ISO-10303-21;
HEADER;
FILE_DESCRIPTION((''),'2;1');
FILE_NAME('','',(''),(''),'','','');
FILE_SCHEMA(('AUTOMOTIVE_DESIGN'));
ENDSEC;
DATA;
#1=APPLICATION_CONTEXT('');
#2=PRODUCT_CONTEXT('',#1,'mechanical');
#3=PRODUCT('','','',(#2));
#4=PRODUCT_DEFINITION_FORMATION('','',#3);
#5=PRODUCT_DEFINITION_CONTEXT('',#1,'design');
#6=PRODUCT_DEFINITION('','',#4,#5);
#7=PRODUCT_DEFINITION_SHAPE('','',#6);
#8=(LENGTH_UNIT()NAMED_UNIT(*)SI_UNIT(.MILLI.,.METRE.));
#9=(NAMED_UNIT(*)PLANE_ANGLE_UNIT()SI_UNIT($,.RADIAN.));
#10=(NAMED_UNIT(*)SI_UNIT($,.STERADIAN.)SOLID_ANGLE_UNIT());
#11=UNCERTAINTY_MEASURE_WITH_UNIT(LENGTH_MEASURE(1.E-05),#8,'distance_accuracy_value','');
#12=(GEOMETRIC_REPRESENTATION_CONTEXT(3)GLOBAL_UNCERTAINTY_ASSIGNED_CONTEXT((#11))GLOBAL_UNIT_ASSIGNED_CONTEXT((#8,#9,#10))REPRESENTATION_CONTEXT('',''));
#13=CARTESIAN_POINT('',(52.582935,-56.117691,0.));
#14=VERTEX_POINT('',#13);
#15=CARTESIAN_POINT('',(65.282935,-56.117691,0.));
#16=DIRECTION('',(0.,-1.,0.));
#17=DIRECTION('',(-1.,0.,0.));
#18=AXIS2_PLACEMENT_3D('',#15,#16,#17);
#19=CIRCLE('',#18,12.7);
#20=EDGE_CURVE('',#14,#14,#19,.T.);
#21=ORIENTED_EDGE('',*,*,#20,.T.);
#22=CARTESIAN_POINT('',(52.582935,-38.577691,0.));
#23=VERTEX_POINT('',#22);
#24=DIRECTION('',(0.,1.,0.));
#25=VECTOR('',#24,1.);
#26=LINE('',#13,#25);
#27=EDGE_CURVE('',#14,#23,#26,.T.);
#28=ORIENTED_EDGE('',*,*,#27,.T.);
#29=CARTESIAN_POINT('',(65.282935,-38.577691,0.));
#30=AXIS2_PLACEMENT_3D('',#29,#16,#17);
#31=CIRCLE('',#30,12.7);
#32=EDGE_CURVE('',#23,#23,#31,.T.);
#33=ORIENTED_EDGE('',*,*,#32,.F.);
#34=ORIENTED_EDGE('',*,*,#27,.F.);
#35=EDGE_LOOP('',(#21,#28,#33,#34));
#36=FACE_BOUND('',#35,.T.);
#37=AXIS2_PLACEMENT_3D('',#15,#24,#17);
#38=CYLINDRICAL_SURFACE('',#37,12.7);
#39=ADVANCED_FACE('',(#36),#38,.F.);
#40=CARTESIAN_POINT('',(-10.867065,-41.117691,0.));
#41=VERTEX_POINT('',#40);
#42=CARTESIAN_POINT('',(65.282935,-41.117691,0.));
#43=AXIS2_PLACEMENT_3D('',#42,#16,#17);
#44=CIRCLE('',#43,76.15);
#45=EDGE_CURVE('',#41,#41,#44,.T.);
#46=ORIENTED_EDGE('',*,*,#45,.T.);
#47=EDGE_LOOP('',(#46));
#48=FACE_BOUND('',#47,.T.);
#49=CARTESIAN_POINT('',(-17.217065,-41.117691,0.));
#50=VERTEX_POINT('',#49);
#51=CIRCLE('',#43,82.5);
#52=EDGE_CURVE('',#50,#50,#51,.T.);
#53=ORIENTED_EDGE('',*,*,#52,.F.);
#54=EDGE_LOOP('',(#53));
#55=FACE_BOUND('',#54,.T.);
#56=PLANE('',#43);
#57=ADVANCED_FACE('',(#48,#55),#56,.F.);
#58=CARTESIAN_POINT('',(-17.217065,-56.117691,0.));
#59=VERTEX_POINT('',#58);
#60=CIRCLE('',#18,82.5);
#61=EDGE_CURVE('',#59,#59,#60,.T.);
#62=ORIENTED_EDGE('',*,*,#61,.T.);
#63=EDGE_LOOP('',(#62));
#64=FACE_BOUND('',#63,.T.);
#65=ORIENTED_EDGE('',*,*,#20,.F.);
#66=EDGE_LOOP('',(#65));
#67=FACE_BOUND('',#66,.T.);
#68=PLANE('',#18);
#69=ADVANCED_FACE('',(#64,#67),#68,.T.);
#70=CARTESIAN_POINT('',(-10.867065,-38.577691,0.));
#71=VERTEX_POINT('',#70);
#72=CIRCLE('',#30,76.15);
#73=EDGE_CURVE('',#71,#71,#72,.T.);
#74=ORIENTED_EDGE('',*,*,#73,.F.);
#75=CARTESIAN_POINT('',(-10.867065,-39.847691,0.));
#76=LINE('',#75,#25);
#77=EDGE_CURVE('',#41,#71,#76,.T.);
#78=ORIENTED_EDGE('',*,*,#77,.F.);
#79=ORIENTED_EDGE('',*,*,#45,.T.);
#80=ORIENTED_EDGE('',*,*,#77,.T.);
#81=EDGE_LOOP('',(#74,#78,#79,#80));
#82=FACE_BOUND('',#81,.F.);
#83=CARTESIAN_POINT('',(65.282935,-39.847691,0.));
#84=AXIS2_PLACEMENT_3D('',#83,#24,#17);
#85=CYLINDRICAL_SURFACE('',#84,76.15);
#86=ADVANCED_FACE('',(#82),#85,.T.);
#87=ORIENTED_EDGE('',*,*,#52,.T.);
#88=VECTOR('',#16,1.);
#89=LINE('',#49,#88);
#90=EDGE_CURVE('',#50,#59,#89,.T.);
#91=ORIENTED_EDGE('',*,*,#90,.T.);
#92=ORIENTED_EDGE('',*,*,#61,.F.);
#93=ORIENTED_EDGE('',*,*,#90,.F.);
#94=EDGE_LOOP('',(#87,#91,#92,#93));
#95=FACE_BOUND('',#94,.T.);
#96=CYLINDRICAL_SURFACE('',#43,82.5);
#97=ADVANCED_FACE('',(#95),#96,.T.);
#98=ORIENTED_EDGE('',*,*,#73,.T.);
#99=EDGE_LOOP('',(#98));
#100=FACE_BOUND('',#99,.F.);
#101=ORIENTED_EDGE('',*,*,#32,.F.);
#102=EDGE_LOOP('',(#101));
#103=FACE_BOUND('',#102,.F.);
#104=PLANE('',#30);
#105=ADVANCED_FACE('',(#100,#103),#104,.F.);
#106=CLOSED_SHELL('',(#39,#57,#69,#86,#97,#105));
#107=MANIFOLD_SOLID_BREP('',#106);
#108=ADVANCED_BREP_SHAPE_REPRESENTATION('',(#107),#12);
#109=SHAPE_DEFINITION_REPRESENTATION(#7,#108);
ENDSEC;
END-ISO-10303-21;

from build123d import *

# Parameters (mm, degrees)
F0_W = 63.45
F0_H = 2.54


# Not quite as in the source:
# - a feature names something its author has since deleted; it is built from what else it names


with BuildPart() as f1:
    # F0 (on Top) → F1 (revolve)
    with BuildSketch(Plane.XY):
        Polygon((-10.8670645285, -41.1176908899), (-17.2170645285, -41.1176908899), (-17.2170645285, -56.1176908899), (52.5829354715, -56.1176908899), (52.5829354715, -41.1176908899), align=None)
        with Locations((20.8579354715, -39.8476908899)):
            Rectangle(F0_W, F0_H)
    revolve(axis=Axis((65.2829354715, -48.6176908899, 0), (0, -1, 0)))


solid = f1.part
